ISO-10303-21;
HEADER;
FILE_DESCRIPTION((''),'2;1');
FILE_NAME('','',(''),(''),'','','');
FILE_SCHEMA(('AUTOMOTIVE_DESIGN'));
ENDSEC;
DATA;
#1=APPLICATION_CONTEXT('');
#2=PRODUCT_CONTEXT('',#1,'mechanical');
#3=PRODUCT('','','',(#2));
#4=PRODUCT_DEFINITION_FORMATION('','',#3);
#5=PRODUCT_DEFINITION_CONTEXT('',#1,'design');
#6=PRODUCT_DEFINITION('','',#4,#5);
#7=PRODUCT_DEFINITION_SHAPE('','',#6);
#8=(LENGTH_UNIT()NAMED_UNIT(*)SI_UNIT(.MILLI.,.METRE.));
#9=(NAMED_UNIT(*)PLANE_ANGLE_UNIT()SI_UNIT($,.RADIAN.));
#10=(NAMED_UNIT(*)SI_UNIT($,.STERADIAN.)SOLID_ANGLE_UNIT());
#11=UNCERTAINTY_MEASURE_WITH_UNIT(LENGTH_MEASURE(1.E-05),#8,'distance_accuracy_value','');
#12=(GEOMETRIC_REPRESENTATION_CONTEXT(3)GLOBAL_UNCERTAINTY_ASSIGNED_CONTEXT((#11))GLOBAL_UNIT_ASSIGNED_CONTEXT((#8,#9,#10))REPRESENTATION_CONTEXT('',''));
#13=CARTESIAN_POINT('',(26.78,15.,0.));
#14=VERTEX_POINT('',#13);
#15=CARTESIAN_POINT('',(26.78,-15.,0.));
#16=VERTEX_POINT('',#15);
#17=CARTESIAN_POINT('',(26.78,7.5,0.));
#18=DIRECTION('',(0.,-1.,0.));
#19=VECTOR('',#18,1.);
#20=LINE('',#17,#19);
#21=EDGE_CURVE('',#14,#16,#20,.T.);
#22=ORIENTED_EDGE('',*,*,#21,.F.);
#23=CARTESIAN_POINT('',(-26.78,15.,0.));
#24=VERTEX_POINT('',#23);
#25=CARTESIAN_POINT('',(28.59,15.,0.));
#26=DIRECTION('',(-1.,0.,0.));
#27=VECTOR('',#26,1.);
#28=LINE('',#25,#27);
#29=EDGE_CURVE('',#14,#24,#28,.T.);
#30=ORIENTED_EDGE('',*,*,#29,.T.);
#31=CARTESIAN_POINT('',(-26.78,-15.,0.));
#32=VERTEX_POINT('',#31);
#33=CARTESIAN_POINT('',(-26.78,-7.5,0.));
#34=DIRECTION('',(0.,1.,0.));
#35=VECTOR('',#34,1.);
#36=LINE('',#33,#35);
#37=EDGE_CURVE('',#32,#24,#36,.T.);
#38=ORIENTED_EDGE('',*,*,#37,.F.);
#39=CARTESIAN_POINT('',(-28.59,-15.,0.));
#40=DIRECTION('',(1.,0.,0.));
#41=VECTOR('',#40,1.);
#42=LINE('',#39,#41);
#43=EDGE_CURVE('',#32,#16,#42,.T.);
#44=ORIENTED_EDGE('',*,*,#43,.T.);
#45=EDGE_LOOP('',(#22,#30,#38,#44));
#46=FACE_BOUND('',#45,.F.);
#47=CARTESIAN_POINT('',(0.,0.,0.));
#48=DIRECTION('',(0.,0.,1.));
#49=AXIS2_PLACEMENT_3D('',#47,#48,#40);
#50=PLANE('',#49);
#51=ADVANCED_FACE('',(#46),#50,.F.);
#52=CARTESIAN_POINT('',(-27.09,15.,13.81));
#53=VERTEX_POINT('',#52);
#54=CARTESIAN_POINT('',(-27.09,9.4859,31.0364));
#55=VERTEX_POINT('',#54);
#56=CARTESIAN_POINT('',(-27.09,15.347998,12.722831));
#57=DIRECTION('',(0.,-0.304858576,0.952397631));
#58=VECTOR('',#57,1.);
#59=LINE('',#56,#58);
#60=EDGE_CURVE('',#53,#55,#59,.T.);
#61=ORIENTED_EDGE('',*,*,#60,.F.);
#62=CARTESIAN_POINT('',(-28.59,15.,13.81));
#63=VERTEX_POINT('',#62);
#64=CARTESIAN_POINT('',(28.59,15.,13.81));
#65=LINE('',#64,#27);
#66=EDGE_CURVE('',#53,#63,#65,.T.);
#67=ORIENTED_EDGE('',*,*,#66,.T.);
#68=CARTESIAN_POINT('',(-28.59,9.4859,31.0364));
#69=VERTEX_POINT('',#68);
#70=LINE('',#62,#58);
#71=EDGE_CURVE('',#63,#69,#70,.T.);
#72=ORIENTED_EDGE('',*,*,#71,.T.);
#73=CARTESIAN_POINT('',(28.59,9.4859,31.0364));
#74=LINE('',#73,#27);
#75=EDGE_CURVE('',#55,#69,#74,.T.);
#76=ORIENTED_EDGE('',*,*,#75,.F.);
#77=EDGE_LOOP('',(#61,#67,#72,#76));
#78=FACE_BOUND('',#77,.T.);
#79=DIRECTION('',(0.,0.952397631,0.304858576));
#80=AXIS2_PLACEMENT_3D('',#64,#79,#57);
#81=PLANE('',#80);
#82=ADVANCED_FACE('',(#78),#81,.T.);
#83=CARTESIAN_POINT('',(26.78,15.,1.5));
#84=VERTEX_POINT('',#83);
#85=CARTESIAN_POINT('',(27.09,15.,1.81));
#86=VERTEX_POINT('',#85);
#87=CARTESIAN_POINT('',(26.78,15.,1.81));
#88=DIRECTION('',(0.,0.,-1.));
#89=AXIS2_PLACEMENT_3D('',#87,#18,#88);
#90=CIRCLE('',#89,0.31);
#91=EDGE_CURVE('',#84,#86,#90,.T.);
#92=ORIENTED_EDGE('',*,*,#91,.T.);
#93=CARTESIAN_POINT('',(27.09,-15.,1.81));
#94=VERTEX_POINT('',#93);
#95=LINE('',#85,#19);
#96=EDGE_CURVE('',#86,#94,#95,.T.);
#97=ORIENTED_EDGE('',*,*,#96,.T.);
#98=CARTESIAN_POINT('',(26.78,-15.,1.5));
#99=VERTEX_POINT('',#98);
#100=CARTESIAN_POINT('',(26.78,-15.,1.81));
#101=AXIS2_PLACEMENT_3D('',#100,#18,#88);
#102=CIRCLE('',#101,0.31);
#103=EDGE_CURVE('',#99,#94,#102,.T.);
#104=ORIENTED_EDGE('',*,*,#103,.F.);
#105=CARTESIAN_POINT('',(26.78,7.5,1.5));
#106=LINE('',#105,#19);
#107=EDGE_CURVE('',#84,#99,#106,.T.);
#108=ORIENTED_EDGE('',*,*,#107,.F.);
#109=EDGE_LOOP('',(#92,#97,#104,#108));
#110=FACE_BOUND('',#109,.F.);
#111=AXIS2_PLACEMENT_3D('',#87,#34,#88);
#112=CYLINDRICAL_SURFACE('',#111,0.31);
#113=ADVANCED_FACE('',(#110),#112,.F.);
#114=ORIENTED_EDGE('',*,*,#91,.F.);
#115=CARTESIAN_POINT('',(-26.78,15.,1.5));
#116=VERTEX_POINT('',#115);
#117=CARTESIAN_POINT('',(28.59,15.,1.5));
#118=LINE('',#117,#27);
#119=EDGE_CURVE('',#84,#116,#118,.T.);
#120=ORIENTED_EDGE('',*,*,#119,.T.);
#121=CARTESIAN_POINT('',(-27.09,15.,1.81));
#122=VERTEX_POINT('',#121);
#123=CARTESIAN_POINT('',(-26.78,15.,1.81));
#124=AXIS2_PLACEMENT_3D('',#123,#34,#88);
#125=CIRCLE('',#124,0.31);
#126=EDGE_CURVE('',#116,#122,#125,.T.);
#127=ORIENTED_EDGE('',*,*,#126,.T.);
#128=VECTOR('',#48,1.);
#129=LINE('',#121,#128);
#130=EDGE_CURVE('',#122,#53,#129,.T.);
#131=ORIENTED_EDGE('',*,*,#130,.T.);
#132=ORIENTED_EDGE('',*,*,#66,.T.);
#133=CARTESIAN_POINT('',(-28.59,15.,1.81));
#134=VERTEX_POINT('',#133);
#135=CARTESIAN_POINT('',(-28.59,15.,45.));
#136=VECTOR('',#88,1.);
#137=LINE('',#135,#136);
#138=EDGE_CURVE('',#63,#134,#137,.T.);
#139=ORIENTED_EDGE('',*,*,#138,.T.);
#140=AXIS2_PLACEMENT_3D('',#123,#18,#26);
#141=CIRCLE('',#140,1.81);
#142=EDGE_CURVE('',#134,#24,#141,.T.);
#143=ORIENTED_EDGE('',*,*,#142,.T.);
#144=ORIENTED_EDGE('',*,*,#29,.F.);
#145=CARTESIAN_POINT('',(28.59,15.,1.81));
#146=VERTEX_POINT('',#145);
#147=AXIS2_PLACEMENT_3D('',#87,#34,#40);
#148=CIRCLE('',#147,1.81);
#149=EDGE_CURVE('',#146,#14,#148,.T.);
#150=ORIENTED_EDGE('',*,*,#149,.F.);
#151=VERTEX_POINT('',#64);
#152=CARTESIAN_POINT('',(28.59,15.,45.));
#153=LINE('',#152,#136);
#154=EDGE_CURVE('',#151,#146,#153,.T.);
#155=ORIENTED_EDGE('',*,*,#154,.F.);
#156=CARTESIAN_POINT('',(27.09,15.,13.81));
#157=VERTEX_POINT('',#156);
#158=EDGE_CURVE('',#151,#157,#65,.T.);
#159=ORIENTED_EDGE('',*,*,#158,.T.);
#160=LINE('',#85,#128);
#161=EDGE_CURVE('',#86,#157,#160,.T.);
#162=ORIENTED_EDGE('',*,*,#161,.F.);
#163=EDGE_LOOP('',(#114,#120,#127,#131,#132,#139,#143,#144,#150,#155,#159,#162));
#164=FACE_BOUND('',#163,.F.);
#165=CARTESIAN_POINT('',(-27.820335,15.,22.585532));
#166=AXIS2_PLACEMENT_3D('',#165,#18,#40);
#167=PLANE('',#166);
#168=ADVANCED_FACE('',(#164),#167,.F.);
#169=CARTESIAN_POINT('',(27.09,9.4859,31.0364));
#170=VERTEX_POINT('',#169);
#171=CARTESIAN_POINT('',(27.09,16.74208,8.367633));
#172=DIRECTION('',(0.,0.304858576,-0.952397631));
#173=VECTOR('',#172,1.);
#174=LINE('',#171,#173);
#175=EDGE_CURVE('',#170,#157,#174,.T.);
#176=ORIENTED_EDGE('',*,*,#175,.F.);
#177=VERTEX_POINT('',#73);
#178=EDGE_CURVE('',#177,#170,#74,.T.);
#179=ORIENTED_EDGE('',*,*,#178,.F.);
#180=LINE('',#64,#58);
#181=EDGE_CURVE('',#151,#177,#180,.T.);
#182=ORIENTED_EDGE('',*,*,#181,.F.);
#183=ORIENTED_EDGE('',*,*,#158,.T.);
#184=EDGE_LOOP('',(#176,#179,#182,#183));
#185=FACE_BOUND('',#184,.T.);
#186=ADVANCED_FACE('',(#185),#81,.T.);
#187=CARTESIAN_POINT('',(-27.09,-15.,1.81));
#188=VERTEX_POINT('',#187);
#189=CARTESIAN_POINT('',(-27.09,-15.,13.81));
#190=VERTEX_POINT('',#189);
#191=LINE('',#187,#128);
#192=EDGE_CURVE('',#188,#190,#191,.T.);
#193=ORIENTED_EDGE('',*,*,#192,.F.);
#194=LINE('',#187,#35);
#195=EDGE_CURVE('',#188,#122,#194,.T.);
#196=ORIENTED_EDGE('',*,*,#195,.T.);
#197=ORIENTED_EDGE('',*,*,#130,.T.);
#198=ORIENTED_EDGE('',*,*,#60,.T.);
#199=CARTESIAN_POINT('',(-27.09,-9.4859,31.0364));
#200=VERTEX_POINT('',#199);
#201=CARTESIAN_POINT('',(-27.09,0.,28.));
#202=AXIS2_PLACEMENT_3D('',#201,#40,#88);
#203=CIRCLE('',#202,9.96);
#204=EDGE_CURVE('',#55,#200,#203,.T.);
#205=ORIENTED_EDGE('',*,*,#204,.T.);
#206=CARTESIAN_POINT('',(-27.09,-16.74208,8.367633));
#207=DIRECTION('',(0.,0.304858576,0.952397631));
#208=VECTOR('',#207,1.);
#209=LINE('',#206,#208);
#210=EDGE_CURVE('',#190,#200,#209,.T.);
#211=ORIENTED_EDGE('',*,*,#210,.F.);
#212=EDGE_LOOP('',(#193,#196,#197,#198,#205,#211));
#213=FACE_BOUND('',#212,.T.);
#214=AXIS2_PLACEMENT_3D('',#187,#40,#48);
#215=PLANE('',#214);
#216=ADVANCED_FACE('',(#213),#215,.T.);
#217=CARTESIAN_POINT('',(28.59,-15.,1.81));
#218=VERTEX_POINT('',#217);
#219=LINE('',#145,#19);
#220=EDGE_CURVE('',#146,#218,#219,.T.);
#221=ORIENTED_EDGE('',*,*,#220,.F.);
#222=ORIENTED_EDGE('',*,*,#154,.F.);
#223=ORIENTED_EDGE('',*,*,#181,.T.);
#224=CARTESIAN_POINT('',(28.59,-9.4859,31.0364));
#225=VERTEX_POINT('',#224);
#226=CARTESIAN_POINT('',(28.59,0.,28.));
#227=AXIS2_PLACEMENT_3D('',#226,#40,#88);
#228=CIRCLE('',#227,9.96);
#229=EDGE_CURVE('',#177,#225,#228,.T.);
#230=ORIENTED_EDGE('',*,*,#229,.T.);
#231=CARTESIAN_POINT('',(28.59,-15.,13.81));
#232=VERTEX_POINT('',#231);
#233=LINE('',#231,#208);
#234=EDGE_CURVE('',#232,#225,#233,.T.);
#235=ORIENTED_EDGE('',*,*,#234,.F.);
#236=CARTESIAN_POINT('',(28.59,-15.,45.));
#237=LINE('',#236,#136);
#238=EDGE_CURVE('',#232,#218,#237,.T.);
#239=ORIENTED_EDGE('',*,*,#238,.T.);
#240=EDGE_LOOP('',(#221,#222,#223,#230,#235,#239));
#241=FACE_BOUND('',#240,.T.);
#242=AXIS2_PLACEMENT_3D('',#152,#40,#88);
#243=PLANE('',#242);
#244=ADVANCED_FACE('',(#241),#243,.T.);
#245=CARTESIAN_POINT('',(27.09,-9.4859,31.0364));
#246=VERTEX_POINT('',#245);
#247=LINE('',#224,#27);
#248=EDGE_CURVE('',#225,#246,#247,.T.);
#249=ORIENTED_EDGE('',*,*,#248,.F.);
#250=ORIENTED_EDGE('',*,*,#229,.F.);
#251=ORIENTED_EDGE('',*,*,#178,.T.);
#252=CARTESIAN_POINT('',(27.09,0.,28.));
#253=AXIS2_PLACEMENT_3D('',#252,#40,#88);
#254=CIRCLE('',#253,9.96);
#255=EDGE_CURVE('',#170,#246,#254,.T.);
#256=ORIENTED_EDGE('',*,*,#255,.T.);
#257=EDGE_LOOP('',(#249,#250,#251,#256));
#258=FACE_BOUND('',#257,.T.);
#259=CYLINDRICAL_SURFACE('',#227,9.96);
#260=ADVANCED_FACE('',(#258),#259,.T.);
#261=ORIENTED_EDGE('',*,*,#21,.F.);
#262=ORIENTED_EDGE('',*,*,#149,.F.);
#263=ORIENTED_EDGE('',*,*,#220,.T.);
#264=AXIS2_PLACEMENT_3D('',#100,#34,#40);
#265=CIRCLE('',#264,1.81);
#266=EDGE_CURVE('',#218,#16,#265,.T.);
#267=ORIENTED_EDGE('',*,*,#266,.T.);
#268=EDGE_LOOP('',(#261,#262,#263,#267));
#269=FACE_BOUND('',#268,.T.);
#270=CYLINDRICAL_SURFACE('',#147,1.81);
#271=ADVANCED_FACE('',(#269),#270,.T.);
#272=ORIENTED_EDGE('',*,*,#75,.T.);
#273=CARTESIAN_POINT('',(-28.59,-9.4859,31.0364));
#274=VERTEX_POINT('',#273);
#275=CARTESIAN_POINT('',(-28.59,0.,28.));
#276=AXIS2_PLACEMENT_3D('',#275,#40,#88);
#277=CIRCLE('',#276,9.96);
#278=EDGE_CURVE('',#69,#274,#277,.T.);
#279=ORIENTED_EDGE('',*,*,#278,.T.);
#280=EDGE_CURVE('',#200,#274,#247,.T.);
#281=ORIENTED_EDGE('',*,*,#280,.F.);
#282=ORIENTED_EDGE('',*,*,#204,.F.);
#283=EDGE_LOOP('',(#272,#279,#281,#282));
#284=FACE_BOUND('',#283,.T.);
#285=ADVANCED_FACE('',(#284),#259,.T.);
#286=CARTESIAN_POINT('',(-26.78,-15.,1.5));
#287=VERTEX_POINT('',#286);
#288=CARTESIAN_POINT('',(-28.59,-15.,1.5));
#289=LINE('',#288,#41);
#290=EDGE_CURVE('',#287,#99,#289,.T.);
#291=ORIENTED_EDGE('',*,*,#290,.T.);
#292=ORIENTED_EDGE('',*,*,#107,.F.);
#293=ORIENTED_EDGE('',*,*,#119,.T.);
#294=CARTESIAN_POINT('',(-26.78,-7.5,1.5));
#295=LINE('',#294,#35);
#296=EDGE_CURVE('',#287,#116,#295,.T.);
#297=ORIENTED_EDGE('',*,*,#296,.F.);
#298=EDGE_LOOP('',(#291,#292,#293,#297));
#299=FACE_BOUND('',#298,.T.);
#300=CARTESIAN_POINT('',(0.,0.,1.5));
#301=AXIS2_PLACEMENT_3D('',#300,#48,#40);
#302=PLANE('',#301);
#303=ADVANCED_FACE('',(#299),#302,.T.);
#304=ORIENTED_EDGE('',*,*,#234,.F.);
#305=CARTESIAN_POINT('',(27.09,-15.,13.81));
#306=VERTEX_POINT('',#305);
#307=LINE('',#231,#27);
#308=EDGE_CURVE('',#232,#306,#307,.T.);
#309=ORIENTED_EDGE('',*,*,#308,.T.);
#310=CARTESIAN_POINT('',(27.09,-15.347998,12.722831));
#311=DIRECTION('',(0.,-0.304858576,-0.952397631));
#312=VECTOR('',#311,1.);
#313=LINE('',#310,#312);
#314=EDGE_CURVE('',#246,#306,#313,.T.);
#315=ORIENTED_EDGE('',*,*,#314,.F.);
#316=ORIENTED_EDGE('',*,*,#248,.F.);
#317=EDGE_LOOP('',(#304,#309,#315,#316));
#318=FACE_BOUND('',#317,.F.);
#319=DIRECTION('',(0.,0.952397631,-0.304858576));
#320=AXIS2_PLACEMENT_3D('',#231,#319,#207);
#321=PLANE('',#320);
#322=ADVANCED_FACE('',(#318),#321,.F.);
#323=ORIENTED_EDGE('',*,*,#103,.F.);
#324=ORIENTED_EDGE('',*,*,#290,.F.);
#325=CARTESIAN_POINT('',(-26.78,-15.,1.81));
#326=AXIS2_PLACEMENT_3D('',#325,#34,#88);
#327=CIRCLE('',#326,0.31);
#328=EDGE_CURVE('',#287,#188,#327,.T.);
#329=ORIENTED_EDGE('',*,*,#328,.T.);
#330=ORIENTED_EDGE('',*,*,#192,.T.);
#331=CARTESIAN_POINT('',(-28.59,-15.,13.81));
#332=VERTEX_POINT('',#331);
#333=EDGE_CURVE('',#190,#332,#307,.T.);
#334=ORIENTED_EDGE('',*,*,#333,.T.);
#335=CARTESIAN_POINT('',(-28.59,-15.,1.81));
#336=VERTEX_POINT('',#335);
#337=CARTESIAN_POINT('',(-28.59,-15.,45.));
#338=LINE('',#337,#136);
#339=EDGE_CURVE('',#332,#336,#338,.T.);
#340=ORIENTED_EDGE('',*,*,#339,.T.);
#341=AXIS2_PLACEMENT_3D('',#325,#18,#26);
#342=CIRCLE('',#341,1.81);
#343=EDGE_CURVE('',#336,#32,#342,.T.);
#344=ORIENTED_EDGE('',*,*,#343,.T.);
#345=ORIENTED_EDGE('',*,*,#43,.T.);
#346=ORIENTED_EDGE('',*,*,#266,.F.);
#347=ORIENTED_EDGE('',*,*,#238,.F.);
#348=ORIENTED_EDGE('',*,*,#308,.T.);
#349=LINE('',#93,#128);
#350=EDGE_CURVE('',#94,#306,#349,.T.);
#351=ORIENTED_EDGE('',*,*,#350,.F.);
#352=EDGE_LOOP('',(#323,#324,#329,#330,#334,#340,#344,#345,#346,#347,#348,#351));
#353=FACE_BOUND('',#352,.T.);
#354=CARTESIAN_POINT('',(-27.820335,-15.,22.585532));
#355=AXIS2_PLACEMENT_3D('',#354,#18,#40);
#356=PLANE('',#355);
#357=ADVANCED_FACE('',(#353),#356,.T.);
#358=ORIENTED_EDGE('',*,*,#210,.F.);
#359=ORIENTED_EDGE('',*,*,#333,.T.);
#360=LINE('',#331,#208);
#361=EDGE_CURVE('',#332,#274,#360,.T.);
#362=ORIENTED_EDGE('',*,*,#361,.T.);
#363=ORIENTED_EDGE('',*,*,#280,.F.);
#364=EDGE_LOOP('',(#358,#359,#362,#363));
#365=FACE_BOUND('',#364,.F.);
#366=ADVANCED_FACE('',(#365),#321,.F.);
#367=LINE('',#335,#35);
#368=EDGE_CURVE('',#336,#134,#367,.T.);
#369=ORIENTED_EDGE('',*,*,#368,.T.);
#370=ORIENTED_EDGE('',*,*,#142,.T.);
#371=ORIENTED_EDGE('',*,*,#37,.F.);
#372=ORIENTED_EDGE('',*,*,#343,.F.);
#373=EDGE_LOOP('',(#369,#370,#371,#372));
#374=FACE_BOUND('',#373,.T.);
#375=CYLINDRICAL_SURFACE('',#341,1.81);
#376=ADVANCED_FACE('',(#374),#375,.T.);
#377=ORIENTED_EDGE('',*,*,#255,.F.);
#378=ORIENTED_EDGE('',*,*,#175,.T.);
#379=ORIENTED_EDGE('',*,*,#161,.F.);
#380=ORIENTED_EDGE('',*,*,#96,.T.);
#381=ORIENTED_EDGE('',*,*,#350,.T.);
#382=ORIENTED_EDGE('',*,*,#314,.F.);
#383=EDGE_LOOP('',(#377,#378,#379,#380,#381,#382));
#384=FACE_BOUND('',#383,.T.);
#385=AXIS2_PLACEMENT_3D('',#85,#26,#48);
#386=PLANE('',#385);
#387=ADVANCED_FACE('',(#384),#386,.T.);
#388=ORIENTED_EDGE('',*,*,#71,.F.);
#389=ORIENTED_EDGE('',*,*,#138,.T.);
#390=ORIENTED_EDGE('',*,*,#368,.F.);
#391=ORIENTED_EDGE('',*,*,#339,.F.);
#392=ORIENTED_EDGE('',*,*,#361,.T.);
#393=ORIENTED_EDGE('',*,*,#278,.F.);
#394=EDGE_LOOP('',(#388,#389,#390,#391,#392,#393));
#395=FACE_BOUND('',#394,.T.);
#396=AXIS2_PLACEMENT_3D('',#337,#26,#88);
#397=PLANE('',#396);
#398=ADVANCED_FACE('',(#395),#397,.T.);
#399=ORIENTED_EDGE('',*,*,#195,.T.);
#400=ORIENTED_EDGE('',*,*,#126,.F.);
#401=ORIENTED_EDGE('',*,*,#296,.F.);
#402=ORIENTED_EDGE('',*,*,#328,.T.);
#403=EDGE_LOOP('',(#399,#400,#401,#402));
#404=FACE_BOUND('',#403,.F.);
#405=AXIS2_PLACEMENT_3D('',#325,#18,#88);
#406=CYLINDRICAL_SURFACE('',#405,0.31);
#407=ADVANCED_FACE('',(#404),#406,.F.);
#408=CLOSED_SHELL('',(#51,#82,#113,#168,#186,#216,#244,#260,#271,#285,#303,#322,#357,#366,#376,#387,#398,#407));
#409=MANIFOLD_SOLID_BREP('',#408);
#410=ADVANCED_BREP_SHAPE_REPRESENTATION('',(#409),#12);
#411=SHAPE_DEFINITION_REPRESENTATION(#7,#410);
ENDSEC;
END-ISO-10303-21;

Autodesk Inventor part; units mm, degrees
ref_plane "YZ Plane" through (0, 0, 0) normal (1, 0, 0) x (0, 1, 0)
ref_plane "XZ Plane" through (0, 0, 0) normal (0, 1, 0) x (-1, 0, 0)
ref_plane "XY Plane" through (0, 0, 0) normal (0, 0, 1) x (1, 0, 0)
sketch "Sketch1" plane through (0, 0, 0) normal (0, 0, 1) x (1, 0, 0)
  line L0 (-28.59, -15) -> (28.59, -15)
  line L1 (28.59, -15) -> (28.59, 15)
  line L2 (28.59, 15) -> (-28.59, 15)
  line L3 (-28.59, 15) -> (-28.59, -15)
  line L4 (-28.59, -15) -> (28.59, 15) construction
  line L5 (28.59, -15) -> (-28.59, 15) construction
  point P0 (0, 0)
  dimension "d0" = 57.18
  dimension "d1" = 30
extrude "Plate1" add sketch "Sketch1" along normal blind 1.5
sketch "Sketch2" plane through (-27.09, -15, 0) normal (-1, 0, 0) x (0, -1, 0)
  line L0 (-30, 0) -> (0, 0)
  line L1 (0, 0) -> (0, 45)
  line L2 (0, 45) -> (-30, 45)
  line L3 (-30, 45) -> (-30, 0)
edge flange "Flange1" height 45 angle 90 thickness 1.5 bend radius 0.31 thickness toward (-1, 0, 0) relief tear relief width 1.5 relief depth 0.75 corner gap 0.31 corner form 0 edges at (-28.59, 0, 1.5) (28.59, 0, 1.5) wall of the first edge with corners at (-27.09, 15, 0) (-27.09, -15, 0) (-27.09, -15, 45) (-27.09, 15, 45)
bend "Bend1"
corner "Corner1"
sketch "Sketch3" plane through (28.59, -15, 45) normal (1, 0, 0) x (0, 0, -1)
  circle A0 centre (17, 15) radius 9.96
  line L0 (0, 30) -> (43.19, 30) projected
  line L1 (43.19, 0) -> (0, 0) projected
  line L2 (31.19, 30) -> (13.9636, 24.4859)
  line L3 (31.19, 0) -> (13.9636, 5.5141)
  line L4 (0, 30) -> (0, 0)
  point P0 (45, 15)
  dimension "d13" = 19.92
  dimension "d14" = 12
  dimension "d15" = 28
extrude "Cut1" cut sketch "Sketch3" against normal blind 57.18 contours A0 L3 L1 L4 L0 L2
equation "\"d2\" = Thickness"
equation "\"d3\" = BendReliefWidth"
equation "\"d4\" = BendReliefDepth"
equation "\"d5\" = MinimumRemnant"
equation "\"d6\" = TransitionRadius"
equation "\"d9\" = BendRadius"
equation "\"d10\" = CornerReliefSize"
equation "\"d11\" = GapSize"
equation "\"d12\" = JacobiRadiusSize"
equation "\"BendReliefWidth\" = Thickness"
equation "\"BendReliefDepth\" = 0.5 * Thickness"
equation "\"CornerReliefSize\" = 4 * Thickness"
equation "\"MinimumRemnant\" = 2 * Thickness"
equation "\"TransitionRadius\" = BendRadius"
equation "\"JacobiRadiusSize\" = BendRadius"
equation "\"GapSize\" = Thickness"
equation "\"Thickness\" = 1.5"
equation "\"BendRadius\" = 0.31"
properties part number "axis_21_bottom_frame" material "Aluminum 6061-AHC"
